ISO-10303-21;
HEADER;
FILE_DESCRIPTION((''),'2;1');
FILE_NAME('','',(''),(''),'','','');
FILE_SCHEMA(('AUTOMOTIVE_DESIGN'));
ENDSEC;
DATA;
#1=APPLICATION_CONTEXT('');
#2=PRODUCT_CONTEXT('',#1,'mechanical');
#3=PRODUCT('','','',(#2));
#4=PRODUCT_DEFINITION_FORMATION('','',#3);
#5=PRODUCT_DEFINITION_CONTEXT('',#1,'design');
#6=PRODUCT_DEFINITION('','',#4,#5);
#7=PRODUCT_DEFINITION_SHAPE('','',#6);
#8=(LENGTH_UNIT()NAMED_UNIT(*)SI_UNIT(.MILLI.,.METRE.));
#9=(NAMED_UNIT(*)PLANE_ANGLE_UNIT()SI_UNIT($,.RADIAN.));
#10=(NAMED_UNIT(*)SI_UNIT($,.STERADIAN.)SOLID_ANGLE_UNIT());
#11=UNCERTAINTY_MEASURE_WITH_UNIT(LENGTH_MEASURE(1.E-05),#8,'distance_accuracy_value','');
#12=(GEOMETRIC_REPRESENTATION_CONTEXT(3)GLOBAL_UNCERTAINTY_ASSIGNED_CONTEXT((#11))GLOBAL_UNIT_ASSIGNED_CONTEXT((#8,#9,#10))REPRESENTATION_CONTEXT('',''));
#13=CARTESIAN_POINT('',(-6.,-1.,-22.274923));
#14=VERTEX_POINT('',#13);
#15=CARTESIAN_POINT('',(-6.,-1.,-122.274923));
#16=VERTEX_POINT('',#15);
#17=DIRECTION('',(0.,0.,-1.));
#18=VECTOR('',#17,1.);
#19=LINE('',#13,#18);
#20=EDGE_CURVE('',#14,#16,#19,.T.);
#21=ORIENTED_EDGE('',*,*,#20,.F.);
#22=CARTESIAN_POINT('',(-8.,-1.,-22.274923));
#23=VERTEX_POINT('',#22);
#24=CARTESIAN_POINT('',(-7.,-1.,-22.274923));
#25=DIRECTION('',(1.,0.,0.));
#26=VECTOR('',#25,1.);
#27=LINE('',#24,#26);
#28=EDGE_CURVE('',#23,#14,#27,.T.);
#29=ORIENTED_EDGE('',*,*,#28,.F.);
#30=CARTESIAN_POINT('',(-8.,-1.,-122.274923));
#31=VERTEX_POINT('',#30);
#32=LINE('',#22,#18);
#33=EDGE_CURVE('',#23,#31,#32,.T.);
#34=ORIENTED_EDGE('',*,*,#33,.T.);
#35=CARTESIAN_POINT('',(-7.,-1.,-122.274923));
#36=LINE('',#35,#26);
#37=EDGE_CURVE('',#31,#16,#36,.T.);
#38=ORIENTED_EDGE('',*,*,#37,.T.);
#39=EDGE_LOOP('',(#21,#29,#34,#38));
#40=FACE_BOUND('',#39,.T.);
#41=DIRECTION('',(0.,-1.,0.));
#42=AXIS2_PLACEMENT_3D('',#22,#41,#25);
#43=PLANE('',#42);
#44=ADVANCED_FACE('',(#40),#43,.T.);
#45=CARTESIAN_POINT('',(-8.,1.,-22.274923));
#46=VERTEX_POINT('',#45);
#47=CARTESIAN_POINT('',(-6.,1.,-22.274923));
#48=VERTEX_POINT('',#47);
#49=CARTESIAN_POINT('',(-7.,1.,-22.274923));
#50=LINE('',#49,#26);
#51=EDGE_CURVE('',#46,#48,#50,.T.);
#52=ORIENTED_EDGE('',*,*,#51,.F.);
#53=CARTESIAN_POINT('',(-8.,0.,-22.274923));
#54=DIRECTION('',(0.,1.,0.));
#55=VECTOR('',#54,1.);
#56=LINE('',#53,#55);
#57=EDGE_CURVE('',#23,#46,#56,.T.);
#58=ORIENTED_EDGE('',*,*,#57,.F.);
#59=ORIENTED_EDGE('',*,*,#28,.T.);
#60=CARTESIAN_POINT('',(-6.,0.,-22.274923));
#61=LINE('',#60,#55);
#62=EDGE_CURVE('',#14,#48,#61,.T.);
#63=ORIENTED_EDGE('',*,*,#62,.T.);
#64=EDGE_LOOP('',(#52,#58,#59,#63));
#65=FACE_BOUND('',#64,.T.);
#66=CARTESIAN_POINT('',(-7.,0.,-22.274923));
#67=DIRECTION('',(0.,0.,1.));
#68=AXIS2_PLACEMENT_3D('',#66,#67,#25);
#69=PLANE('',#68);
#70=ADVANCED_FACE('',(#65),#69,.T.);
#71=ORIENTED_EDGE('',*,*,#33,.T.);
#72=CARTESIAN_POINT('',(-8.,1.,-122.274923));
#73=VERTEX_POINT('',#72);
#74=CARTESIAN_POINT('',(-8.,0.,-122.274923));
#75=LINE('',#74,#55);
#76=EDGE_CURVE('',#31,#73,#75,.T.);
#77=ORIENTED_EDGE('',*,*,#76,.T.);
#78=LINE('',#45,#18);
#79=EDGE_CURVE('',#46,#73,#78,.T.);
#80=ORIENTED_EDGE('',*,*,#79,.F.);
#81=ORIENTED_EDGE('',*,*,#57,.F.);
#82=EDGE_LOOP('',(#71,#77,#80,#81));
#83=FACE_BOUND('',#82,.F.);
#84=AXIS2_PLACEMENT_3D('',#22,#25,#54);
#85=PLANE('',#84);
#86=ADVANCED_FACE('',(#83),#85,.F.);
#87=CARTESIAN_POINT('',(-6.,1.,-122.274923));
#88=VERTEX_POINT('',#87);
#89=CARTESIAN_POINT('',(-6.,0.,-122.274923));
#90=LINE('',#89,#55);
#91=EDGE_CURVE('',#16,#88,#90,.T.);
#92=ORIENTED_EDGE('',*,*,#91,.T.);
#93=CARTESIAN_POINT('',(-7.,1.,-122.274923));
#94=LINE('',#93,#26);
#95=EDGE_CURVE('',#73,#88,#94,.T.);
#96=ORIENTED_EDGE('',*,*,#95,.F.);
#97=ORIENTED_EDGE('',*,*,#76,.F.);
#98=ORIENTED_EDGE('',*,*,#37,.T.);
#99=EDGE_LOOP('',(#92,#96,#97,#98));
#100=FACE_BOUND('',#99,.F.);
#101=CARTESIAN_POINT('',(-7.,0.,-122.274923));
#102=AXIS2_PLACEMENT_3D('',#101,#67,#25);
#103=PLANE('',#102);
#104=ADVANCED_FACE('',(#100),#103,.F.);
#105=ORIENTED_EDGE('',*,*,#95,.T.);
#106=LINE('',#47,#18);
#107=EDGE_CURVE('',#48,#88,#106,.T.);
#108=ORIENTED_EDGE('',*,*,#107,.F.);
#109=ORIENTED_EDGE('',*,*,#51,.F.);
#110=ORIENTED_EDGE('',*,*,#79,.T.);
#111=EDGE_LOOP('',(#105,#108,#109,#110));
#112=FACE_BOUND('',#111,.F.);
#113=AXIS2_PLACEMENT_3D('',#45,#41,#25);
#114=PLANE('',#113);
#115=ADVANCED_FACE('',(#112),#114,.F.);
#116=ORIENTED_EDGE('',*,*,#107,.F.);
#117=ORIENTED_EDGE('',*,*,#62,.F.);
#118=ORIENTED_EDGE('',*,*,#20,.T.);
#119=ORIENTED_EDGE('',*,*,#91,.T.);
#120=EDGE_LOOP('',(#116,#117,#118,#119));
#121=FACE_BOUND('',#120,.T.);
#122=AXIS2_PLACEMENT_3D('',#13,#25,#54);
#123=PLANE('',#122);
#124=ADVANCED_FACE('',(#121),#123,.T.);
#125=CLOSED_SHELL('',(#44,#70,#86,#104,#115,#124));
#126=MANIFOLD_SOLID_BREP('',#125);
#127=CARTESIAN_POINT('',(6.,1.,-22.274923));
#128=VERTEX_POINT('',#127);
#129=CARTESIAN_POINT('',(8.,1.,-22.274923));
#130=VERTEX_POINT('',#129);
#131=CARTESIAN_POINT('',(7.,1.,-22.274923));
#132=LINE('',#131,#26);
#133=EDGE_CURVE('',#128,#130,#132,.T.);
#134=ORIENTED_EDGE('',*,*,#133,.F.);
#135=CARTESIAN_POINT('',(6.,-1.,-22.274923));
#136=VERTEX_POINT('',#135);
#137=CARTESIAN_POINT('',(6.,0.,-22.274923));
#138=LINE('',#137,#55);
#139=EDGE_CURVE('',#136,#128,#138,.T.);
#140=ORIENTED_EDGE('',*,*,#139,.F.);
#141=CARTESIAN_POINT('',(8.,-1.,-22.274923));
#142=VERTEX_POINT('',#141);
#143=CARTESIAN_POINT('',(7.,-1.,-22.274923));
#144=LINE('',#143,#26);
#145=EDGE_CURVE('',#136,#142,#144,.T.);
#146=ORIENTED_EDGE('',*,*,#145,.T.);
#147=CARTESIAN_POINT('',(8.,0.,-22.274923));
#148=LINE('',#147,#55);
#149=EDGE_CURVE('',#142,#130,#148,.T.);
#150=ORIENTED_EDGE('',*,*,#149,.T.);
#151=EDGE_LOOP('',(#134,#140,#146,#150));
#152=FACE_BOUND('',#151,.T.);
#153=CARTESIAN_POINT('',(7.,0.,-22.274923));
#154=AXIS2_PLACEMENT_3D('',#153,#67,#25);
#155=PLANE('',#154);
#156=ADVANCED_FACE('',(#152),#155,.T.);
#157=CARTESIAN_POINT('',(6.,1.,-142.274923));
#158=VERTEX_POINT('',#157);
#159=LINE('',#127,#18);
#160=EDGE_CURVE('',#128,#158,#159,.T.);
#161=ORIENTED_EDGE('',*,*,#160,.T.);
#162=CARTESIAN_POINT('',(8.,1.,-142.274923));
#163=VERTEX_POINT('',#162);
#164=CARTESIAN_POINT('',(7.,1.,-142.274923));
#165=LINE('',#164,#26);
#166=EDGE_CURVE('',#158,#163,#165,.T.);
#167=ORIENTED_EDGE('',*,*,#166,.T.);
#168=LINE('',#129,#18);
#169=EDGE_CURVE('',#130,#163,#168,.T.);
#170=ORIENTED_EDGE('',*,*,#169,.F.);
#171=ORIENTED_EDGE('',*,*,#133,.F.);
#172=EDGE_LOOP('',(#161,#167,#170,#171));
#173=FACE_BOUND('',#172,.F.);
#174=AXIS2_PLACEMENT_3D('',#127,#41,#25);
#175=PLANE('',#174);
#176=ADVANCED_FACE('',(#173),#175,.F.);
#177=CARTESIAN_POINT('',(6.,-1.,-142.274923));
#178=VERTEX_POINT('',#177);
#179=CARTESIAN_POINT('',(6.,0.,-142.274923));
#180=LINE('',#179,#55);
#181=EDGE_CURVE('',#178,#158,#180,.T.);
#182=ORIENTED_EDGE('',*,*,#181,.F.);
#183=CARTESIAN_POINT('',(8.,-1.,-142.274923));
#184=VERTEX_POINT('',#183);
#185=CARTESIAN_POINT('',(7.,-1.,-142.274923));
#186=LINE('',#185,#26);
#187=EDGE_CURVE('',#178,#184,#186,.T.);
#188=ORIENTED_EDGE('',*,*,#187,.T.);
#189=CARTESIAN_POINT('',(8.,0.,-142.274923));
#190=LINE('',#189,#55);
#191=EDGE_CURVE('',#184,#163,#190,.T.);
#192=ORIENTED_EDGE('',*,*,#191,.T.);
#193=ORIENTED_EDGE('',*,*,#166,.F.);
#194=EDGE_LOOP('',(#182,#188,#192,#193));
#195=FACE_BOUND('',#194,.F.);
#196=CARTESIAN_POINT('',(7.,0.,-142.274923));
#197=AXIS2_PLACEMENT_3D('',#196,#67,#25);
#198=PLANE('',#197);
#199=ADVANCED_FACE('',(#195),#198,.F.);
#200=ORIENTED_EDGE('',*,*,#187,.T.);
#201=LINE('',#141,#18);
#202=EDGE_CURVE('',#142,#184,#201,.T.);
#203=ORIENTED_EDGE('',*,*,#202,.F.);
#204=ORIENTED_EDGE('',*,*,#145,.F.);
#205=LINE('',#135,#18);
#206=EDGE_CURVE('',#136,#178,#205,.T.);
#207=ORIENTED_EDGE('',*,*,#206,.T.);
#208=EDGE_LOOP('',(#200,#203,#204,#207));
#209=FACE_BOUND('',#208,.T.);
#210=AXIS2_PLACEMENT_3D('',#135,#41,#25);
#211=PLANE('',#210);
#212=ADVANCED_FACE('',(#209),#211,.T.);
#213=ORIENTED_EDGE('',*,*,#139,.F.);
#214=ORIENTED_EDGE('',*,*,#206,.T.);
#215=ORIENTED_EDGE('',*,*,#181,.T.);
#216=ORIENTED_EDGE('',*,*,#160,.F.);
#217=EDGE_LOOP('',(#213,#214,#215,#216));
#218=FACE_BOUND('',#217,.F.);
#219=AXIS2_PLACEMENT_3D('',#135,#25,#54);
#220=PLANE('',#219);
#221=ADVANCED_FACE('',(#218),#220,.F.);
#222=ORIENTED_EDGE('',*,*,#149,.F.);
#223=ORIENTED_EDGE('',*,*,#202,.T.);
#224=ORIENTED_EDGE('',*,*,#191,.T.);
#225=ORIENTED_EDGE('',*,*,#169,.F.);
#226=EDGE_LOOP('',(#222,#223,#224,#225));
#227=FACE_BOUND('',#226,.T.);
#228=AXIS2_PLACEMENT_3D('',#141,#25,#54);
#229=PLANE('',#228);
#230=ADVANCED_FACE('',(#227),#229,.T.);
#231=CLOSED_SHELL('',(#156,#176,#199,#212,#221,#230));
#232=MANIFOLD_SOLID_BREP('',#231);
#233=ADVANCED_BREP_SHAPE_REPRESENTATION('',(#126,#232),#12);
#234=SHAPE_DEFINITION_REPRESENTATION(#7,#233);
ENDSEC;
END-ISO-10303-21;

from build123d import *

# Parameters (mm, degrees)
F3_W     = 2
F3_H     = 2
F4_DEPTH = 120
F5_DEPTH = 100


# Not quite as in the source:
# - the program builds the solid bodies; features that only make, move or delete a surface that nothing else refers to are left out


with BuildPart() as f4:
    # F3 (on face) → F4 (new body)
    with BuildSketch(Plane.XY.offset(-22.2749225795)):
        with Locations((7, 0)):
            Rectangle(F3_W, F3_H)
    extrude(amount=-F4_DEPTH)


with BuildPart() as f5:
    # F3 (on face) → F5 (new body)
    with BuildSketch(Plane.XY.offset(-22.2749225795)):
        with Locations((-7, 0)):
            Rectangle(F3_W, F3_H)
    extrude(amount=-F5_DEPTH)


solid = Compound([f4.part, f5.part])
